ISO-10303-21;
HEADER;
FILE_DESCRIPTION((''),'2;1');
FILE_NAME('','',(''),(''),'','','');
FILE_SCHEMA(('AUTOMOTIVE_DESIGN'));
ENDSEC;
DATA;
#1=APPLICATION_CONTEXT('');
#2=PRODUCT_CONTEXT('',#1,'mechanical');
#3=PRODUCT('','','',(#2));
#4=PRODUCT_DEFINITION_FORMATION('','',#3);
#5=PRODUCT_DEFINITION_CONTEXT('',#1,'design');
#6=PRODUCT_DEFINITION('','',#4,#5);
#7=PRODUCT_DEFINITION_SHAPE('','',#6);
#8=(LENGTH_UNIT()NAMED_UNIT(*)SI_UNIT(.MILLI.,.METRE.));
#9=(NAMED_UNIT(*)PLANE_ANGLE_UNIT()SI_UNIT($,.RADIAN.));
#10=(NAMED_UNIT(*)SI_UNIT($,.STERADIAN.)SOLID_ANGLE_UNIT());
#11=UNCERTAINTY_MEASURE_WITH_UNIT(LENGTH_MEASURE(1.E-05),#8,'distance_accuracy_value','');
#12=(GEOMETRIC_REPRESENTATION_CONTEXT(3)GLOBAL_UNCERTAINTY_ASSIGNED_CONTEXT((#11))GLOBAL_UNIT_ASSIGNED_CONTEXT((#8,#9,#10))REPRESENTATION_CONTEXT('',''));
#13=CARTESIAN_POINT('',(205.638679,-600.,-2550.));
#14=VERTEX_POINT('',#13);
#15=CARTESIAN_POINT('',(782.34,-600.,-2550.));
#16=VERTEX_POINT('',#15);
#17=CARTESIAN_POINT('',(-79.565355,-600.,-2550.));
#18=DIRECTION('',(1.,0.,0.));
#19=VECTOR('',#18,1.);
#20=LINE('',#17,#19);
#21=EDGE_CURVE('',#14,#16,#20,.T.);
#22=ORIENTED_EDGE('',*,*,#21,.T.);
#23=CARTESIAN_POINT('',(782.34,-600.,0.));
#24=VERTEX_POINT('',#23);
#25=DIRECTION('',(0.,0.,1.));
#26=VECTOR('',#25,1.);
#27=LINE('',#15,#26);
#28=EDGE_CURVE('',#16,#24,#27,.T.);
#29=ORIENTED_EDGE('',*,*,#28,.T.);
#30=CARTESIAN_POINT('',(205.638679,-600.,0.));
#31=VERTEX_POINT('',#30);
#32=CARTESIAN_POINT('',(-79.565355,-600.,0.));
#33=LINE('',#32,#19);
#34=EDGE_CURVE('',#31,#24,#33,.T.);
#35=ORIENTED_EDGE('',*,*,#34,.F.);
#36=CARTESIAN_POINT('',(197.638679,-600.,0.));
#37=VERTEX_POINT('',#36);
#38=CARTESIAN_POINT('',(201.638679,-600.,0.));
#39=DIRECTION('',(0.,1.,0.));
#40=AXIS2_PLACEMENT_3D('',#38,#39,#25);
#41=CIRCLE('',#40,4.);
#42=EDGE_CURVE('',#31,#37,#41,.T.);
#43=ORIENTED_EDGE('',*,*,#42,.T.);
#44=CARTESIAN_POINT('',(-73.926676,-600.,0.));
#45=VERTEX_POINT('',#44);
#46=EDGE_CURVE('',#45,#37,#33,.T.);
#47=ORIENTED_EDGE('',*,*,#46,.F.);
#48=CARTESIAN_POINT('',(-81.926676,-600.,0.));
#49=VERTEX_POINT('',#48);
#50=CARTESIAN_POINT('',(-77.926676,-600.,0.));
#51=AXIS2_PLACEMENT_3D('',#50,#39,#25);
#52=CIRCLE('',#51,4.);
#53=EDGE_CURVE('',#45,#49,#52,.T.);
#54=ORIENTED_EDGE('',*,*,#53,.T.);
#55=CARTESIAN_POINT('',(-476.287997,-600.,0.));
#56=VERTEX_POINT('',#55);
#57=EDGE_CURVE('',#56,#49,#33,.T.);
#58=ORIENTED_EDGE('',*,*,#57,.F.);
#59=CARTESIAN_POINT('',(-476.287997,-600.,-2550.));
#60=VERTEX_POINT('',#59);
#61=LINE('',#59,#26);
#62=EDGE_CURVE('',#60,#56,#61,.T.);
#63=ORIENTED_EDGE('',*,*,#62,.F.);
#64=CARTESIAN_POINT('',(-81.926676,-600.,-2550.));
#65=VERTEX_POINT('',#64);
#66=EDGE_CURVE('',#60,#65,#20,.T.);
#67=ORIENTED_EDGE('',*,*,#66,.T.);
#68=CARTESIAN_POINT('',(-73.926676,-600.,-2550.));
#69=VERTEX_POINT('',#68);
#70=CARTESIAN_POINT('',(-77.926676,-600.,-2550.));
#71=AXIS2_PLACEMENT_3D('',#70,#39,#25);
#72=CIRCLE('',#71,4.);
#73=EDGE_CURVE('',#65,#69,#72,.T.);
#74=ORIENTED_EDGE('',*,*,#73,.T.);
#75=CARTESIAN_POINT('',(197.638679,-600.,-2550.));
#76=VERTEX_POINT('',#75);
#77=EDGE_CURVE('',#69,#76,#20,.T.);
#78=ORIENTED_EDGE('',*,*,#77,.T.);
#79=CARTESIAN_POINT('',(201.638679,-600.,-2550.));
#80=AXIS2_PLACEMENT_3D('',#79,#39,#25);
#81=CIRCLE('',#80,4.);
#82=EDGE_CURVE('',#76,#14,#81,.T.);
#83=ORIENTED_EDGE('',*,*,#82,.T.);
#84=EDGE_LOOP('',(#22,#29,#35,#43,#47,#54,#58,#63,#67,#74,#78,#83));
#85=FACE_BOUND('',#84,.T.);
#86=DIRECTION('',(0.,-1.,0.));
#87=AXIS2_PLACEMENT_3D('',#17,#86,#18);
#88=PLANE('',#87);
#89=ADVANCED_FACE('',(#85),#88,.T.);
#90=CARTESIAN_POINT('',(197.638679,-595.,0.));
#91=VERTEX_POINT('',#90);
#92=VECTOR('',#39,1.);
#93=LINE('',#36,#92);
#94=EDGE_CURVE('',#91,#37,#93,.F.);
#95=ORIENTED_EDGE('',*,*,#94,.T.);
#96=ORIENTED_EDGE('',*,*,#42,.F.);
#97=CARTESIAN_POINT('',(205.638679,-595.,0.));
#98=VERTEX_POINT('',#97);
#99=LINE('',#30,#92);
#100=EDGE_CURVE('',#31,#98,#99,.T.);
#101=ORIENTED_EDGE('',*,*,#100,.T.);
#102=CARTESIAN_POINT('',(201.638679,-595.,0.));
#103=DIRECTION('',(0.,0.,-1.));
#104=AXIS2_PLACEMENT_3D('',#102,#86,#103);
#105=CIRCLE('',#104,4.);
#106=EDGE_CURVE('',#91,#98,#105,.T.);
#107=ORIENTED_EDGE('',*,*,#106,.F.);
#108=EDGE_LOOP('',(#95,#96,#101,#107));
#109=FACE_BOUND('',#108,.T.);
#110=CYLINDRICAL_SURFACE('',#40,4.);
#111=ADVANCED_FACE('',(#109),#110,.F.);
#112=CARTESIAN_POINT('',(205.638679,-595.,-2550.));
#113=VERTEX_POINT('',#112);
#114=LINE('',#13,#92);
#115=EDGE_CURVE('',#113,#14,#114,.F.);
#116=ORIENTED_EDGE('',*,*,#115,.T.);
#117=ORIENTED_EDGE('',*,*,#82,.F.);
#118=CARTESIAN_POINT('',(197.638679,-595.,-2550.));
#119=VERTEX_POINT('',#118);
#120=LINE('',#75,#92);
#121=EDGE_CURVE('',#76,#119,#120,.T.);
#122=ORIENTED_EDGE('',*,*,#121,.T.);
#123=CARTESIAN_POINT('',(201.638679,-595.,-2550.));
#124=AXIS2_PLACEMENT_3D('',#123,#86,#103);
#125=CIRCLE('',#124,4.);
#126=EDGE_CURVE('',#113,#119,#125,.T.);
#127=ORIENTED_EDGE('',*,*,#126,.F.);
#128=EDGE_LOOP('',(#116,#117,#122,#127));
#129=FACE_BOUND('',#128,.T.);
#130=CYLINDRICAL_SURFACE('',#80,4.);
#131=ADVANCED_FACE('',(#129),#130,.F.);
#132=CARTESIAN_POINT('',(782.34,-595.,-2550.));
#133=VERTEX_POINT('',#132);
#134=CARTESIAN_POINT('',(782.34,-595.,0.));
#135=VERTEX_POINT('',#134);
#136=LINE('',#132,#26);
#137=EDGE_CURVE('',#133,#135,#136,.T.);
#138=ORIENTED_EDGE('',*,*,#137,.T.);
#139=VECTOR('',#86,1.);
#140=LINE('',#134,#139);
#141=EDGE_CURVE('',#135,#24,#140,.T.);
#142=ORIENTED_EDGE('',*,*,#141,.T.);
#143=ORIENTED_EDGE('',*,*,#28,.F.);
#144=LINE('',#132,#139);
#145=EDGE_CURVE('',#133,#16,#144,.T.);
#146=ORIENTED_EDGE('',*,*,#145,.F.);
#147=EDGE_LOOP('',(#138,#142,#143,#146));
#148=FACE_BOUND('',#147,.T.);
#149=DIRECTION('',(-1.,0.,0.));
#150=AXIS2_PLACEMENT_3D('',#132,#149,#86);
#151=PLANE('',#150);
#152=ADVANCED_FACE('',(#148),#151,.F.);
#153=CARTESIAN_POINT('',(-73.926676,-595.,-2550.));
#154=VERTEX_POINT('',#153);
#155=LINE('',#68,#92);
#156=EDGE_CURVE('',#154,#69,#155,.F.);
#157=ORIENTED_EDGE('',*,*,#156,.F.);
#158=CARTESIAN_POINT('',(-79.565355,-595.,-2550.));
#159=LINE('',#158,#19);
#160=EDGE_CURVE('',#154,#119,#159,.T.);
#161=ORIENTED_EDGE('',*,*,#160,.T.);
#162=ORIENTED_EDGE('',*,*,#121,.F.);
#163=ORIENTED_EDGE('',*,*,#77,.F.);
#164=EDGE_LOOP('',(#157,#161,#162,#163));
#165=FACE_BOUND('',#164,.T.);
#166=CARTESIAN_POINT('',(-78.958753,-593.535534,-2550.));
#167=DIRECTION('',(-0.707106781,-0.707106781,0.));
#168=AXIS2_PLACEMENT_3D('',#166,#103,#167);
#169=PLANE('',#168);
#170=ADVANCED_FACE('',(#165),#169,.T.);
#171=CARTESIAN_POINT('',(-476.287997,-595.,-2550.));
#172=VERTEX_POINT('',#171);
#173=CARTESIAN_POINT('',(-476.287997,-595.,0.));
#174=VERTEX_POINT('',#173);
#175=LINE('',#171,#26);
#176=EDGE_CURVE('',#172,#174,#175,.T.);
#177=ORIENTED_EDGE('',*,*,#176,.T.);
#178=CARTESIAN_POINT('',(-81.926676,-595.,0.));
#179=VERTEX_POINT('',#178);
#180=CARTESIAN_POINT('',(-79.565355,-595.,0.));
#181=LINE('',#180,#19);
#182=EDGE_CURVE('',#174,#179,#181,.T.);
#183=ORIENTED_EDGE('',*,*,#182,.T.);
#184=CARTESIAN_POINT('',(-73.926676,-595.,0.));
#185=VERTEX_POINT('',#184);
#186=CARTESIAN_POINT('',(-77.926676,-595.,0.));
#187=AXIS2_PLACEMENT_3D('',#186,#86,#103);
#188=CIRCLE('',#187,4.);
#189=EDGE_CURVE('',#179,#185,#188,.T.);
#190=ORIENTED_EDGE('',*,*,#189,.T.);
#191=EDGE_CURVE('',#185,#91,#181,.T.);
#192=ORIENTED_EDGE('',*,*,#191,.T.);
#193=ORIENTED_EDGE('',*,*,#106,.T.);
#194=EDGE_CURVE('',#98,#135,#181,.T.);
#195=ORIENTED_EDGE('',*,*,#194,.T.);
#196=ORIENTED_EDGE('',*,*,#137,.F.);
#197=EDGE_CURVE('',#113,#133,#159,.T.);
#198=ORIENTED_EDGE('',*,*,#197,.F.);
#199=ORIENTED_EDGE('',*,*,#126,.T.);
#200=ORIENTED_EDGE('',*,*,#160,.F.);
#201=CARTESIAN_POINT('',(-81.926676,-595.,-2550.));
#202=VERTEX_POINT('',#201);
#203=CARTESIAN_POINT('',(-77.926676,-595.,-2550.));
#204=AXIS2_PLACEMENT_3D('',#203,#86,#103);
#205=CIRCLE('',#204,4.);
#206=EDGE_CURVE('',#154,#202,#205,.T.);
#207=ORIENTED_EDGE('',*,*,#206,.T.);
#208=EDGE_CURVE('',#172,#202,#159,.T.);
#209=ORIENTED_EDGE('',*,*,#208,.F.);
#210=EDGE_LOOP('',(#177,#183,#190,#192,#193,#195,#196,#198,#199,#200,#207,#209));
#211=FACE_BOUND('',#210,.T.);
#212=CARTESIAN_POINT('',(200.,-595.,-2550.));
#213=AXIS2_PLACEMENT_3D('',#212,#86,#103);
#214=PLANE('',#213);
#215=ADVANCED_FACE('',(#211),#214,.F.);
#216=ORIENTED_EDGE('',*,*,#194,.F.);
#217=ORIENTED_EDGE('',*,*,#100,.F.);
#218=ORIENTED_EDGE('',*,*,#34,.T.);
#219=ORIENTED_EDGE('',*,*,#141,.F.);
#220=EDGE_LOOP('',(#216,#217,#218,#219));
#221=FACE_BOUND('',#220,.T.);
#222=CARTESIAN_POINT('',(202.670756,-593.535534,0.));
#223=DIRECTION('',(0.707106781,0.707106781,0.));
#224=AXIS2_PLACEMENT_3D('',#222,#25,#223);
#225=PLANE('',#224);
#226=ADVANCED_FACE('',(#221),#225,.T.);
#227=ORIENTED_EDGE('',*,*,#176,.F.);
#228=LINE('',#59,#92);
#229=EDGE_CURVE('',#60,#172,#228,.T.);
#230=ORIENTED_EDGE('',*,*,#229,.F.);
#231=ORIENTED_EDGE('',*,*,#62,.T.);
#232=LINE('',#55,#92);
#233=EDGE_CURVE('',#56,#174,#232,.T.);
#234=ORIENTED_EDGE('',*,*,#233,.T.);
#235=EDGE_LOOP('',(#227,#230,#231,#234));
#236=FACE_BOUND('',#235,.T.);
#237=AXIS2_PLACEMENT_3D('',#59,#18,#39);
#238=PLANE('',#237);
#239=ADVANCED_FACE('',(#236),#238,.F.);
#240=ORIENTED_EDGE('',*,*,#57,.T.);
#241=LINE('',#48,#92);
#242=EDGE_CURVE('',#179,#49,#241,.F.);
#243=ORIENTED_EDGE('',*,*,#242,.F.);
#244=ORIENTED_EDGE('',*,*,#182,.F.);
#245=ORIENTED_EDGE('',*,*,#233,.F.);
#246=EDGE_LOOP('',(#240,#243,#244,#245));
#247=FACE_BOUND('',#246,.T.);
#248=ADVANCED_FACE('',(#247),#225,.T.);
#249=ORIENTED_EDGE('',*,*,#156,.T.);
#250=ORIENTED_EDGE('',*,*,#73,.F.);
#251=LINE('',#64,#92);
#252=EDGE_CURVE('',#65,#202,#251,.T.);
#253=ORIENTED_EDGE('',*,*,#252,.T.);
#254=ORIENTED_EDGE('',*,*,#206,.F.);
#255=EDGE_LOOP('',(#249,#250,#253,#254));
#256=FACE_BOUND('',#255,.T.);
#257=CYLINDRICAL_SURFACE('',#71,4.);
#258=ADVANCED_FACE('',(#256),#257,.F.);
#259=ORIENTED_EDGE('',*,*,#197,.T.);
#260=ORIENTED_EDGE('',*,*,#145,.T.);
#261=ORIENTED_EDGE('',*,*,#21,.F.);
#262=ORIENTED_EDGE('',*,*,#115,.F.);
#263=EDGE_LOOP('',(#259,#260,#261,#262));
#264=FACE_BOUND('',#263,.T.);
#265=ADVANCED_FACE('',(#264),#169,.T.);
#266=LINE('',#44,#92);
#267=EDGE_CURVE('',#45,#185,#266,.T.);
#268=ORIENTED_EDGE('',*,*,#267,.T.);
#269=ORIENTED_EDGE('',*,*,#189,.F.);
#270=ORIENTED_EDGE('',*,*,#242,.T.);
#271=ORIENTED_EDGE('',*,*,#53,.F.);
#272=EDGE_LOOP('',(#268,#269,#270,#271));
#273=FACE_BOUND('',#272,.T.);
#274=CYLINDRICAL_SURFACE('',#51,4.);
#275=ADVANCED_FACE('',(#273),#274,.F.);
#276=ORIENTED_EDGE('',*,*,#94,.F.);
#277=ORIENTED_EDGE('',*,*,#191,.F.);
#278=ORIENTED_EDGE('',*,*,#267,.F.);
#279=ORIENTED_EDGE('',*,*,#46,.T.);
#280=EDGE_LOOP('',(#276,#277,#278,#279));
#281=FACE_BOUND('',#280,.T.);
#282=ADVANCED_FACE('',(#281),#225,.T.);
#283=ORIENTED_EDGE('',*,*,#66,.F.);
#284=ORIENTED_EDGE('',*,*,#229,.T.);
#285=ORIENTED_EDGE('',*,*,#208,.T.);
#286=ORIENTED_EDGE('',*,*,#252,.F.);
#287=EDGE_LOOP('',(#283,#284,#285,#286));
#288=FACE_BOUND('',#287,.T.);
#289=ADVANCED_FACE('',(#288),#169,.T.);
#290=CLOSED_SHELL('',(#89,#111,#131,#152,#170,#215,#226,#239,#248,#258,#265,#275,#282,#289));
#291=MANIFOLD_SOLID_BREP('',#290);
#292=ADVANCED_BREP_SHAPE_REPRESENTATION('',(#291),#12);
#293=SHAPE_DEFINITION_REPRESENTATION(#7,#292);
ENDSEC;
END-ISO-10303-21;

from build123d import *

# Parameters (mm, degrees)
TABAN_FLAN_1_DEPTH        = 2550
KES_EKSTR_ZYON1_OUTLINE_W = 207
KES_EKSTR_ZYON1_OUTLINE_H = 2550
KES_EKSTR_ZYON1_DEPTH     = 595
KES_EKSTR_ZYON1_START     = -5
KES_EKSTR_ZYON1_2_DEPTH   = 5
KES_EKSTR_ZYON1_3_DEPTH   = 5


# Read off the part's stored shape, not the designer's step: Kes-Ekstrüzyon1
# Sheet-metal steps are written as plain solids
with BuildPart() as part:
    # Çizim1 → Taban-Flanş1 (new body)
    with BuildSketch(Plane.XY):
        with BuildLine():
            Line((0, 0), (0, -395.857864376))
            ThreePointArc((0, -395.857864376), (0.761204675, -399.6846987), (2.928932188, -402.928932188))
            Line((2.928932188, -402.928932188), (197.071067812, -597.071067812))
            ThreePointArc((197.071067812, -597.071067812), (200.3153013, -599.238795325), (204.142135624, -600))
            Line((204.142135624, -600), (782.34, -600))
            Line((782.34, -600), (782.34, -595))
            Line((782.34, -595), (204.142135624, -595))
            ThreePointArc((204.142135624, -595), (202.228718462, -594.619397663), (200.606601718, -593.535533906))
            Line((200.606601718, -593.535533906), (6.464466094, -399.393398282))
            ThreePointArc((6.464466094, -399.393398282), (5.380602337, -397.771281538), (5, -395.857864376))
            Line((5, -395.857864376), (5, 0))
            Line((5, 0), (0, 0))
        make_face()
    extrude(amount=-TABAN_FLAN_1_DEPTH)

    # Kes-Ekstrüzyon1 outline → Kes-Ekstrüzyon1 (cut)
    with BuildSketch(Plane(origin=(0, -595, 0), x_dir=(1, 0, 0), z_dir=(0, 1, 0))):
        with Locations((103.5, 1275)):
            Rectangle(KES_EKSTR_ZYON1_OUTLINE_W, KES_EKSTR_ZYON1_OUTLINE_H)
    extrude(amount=KES_EKSTR_ZYON1_DEPTH, mode=Mode.SUBTRACT)

    # Kes-Ekstr_zyon1 2 outline → Kes-Ekstr_zyon1 2 (cut)
    with BuildSketch(Plane(origin=(0, -595, 0), x_dir=(1, 0, 0), z_dir=(0, 1, 0)).offset(KES_EKSTR_ZYON1_START)):
        with BuildLine():
            ThreePointArc((197.638678978, 2550), (201.638678978, 2546), (205.638678978, 2550))
            Line((205.638678978, 2550), (197.638678978, 2550))
        make_face()
        with BuildLine():
            Line((197.638678978, 0), (205.638678978, 0))
            ThreePointArc((205.638678978, 0), (201.638678978, 4), (197.638678978, 0))
        make_face()
    extrude(amount=KES_EKSTR_ZYON1_2_DEPTH, mode=Mode.SUBTRACT)

    # Kes-Ekstr_zyon1 3 outline → Kes-Ekstr_zyon1 3 (add)
    with BuildSketch(Plane(origin=(0, -595, 0), x_dir=(1, 0, 0), z_dir=(0, 1, 0)).offset(KES_EKSTR_ZYON1_START)):
        with BuildLine():
            ThreePointArc((-73.926675541, 2550), (-77.926675541, 2546), (-81.926675541, 2550))
            Line((-81.926675541, 2550), (-476.287996563, 2550))
            Line((-476.287996563, 2550), (-476.287996563, 0))
            Line((-476.287996563, 0), (-81.926675541, 0))
            ThreePointArc((-81.926675541, 0), (-77.926675541, 4), (-73.926675541, 0))
            Line((-73.926675541, 0), (197.638678978, 0))
            ThreePointArc((197.638678978, 0), (201.638678978, 4), (205.638678978, 0))
            Line((205.638678978, 0), (207, 0))
            Line((207, 0), (207, 2550))
            Line((207, 2550), (205.638678978, 2550))
            ThreePointArc((205.638678978, 2550), (201.638678978, 2546), (197.638678978, 2550))
            Line((197.638678978, 2550), (-73.926675541, 2550))
        make_face()
    extrude(amount=KES_EKSTR_ZYON1_3_DEPTH)


solid = part.part
